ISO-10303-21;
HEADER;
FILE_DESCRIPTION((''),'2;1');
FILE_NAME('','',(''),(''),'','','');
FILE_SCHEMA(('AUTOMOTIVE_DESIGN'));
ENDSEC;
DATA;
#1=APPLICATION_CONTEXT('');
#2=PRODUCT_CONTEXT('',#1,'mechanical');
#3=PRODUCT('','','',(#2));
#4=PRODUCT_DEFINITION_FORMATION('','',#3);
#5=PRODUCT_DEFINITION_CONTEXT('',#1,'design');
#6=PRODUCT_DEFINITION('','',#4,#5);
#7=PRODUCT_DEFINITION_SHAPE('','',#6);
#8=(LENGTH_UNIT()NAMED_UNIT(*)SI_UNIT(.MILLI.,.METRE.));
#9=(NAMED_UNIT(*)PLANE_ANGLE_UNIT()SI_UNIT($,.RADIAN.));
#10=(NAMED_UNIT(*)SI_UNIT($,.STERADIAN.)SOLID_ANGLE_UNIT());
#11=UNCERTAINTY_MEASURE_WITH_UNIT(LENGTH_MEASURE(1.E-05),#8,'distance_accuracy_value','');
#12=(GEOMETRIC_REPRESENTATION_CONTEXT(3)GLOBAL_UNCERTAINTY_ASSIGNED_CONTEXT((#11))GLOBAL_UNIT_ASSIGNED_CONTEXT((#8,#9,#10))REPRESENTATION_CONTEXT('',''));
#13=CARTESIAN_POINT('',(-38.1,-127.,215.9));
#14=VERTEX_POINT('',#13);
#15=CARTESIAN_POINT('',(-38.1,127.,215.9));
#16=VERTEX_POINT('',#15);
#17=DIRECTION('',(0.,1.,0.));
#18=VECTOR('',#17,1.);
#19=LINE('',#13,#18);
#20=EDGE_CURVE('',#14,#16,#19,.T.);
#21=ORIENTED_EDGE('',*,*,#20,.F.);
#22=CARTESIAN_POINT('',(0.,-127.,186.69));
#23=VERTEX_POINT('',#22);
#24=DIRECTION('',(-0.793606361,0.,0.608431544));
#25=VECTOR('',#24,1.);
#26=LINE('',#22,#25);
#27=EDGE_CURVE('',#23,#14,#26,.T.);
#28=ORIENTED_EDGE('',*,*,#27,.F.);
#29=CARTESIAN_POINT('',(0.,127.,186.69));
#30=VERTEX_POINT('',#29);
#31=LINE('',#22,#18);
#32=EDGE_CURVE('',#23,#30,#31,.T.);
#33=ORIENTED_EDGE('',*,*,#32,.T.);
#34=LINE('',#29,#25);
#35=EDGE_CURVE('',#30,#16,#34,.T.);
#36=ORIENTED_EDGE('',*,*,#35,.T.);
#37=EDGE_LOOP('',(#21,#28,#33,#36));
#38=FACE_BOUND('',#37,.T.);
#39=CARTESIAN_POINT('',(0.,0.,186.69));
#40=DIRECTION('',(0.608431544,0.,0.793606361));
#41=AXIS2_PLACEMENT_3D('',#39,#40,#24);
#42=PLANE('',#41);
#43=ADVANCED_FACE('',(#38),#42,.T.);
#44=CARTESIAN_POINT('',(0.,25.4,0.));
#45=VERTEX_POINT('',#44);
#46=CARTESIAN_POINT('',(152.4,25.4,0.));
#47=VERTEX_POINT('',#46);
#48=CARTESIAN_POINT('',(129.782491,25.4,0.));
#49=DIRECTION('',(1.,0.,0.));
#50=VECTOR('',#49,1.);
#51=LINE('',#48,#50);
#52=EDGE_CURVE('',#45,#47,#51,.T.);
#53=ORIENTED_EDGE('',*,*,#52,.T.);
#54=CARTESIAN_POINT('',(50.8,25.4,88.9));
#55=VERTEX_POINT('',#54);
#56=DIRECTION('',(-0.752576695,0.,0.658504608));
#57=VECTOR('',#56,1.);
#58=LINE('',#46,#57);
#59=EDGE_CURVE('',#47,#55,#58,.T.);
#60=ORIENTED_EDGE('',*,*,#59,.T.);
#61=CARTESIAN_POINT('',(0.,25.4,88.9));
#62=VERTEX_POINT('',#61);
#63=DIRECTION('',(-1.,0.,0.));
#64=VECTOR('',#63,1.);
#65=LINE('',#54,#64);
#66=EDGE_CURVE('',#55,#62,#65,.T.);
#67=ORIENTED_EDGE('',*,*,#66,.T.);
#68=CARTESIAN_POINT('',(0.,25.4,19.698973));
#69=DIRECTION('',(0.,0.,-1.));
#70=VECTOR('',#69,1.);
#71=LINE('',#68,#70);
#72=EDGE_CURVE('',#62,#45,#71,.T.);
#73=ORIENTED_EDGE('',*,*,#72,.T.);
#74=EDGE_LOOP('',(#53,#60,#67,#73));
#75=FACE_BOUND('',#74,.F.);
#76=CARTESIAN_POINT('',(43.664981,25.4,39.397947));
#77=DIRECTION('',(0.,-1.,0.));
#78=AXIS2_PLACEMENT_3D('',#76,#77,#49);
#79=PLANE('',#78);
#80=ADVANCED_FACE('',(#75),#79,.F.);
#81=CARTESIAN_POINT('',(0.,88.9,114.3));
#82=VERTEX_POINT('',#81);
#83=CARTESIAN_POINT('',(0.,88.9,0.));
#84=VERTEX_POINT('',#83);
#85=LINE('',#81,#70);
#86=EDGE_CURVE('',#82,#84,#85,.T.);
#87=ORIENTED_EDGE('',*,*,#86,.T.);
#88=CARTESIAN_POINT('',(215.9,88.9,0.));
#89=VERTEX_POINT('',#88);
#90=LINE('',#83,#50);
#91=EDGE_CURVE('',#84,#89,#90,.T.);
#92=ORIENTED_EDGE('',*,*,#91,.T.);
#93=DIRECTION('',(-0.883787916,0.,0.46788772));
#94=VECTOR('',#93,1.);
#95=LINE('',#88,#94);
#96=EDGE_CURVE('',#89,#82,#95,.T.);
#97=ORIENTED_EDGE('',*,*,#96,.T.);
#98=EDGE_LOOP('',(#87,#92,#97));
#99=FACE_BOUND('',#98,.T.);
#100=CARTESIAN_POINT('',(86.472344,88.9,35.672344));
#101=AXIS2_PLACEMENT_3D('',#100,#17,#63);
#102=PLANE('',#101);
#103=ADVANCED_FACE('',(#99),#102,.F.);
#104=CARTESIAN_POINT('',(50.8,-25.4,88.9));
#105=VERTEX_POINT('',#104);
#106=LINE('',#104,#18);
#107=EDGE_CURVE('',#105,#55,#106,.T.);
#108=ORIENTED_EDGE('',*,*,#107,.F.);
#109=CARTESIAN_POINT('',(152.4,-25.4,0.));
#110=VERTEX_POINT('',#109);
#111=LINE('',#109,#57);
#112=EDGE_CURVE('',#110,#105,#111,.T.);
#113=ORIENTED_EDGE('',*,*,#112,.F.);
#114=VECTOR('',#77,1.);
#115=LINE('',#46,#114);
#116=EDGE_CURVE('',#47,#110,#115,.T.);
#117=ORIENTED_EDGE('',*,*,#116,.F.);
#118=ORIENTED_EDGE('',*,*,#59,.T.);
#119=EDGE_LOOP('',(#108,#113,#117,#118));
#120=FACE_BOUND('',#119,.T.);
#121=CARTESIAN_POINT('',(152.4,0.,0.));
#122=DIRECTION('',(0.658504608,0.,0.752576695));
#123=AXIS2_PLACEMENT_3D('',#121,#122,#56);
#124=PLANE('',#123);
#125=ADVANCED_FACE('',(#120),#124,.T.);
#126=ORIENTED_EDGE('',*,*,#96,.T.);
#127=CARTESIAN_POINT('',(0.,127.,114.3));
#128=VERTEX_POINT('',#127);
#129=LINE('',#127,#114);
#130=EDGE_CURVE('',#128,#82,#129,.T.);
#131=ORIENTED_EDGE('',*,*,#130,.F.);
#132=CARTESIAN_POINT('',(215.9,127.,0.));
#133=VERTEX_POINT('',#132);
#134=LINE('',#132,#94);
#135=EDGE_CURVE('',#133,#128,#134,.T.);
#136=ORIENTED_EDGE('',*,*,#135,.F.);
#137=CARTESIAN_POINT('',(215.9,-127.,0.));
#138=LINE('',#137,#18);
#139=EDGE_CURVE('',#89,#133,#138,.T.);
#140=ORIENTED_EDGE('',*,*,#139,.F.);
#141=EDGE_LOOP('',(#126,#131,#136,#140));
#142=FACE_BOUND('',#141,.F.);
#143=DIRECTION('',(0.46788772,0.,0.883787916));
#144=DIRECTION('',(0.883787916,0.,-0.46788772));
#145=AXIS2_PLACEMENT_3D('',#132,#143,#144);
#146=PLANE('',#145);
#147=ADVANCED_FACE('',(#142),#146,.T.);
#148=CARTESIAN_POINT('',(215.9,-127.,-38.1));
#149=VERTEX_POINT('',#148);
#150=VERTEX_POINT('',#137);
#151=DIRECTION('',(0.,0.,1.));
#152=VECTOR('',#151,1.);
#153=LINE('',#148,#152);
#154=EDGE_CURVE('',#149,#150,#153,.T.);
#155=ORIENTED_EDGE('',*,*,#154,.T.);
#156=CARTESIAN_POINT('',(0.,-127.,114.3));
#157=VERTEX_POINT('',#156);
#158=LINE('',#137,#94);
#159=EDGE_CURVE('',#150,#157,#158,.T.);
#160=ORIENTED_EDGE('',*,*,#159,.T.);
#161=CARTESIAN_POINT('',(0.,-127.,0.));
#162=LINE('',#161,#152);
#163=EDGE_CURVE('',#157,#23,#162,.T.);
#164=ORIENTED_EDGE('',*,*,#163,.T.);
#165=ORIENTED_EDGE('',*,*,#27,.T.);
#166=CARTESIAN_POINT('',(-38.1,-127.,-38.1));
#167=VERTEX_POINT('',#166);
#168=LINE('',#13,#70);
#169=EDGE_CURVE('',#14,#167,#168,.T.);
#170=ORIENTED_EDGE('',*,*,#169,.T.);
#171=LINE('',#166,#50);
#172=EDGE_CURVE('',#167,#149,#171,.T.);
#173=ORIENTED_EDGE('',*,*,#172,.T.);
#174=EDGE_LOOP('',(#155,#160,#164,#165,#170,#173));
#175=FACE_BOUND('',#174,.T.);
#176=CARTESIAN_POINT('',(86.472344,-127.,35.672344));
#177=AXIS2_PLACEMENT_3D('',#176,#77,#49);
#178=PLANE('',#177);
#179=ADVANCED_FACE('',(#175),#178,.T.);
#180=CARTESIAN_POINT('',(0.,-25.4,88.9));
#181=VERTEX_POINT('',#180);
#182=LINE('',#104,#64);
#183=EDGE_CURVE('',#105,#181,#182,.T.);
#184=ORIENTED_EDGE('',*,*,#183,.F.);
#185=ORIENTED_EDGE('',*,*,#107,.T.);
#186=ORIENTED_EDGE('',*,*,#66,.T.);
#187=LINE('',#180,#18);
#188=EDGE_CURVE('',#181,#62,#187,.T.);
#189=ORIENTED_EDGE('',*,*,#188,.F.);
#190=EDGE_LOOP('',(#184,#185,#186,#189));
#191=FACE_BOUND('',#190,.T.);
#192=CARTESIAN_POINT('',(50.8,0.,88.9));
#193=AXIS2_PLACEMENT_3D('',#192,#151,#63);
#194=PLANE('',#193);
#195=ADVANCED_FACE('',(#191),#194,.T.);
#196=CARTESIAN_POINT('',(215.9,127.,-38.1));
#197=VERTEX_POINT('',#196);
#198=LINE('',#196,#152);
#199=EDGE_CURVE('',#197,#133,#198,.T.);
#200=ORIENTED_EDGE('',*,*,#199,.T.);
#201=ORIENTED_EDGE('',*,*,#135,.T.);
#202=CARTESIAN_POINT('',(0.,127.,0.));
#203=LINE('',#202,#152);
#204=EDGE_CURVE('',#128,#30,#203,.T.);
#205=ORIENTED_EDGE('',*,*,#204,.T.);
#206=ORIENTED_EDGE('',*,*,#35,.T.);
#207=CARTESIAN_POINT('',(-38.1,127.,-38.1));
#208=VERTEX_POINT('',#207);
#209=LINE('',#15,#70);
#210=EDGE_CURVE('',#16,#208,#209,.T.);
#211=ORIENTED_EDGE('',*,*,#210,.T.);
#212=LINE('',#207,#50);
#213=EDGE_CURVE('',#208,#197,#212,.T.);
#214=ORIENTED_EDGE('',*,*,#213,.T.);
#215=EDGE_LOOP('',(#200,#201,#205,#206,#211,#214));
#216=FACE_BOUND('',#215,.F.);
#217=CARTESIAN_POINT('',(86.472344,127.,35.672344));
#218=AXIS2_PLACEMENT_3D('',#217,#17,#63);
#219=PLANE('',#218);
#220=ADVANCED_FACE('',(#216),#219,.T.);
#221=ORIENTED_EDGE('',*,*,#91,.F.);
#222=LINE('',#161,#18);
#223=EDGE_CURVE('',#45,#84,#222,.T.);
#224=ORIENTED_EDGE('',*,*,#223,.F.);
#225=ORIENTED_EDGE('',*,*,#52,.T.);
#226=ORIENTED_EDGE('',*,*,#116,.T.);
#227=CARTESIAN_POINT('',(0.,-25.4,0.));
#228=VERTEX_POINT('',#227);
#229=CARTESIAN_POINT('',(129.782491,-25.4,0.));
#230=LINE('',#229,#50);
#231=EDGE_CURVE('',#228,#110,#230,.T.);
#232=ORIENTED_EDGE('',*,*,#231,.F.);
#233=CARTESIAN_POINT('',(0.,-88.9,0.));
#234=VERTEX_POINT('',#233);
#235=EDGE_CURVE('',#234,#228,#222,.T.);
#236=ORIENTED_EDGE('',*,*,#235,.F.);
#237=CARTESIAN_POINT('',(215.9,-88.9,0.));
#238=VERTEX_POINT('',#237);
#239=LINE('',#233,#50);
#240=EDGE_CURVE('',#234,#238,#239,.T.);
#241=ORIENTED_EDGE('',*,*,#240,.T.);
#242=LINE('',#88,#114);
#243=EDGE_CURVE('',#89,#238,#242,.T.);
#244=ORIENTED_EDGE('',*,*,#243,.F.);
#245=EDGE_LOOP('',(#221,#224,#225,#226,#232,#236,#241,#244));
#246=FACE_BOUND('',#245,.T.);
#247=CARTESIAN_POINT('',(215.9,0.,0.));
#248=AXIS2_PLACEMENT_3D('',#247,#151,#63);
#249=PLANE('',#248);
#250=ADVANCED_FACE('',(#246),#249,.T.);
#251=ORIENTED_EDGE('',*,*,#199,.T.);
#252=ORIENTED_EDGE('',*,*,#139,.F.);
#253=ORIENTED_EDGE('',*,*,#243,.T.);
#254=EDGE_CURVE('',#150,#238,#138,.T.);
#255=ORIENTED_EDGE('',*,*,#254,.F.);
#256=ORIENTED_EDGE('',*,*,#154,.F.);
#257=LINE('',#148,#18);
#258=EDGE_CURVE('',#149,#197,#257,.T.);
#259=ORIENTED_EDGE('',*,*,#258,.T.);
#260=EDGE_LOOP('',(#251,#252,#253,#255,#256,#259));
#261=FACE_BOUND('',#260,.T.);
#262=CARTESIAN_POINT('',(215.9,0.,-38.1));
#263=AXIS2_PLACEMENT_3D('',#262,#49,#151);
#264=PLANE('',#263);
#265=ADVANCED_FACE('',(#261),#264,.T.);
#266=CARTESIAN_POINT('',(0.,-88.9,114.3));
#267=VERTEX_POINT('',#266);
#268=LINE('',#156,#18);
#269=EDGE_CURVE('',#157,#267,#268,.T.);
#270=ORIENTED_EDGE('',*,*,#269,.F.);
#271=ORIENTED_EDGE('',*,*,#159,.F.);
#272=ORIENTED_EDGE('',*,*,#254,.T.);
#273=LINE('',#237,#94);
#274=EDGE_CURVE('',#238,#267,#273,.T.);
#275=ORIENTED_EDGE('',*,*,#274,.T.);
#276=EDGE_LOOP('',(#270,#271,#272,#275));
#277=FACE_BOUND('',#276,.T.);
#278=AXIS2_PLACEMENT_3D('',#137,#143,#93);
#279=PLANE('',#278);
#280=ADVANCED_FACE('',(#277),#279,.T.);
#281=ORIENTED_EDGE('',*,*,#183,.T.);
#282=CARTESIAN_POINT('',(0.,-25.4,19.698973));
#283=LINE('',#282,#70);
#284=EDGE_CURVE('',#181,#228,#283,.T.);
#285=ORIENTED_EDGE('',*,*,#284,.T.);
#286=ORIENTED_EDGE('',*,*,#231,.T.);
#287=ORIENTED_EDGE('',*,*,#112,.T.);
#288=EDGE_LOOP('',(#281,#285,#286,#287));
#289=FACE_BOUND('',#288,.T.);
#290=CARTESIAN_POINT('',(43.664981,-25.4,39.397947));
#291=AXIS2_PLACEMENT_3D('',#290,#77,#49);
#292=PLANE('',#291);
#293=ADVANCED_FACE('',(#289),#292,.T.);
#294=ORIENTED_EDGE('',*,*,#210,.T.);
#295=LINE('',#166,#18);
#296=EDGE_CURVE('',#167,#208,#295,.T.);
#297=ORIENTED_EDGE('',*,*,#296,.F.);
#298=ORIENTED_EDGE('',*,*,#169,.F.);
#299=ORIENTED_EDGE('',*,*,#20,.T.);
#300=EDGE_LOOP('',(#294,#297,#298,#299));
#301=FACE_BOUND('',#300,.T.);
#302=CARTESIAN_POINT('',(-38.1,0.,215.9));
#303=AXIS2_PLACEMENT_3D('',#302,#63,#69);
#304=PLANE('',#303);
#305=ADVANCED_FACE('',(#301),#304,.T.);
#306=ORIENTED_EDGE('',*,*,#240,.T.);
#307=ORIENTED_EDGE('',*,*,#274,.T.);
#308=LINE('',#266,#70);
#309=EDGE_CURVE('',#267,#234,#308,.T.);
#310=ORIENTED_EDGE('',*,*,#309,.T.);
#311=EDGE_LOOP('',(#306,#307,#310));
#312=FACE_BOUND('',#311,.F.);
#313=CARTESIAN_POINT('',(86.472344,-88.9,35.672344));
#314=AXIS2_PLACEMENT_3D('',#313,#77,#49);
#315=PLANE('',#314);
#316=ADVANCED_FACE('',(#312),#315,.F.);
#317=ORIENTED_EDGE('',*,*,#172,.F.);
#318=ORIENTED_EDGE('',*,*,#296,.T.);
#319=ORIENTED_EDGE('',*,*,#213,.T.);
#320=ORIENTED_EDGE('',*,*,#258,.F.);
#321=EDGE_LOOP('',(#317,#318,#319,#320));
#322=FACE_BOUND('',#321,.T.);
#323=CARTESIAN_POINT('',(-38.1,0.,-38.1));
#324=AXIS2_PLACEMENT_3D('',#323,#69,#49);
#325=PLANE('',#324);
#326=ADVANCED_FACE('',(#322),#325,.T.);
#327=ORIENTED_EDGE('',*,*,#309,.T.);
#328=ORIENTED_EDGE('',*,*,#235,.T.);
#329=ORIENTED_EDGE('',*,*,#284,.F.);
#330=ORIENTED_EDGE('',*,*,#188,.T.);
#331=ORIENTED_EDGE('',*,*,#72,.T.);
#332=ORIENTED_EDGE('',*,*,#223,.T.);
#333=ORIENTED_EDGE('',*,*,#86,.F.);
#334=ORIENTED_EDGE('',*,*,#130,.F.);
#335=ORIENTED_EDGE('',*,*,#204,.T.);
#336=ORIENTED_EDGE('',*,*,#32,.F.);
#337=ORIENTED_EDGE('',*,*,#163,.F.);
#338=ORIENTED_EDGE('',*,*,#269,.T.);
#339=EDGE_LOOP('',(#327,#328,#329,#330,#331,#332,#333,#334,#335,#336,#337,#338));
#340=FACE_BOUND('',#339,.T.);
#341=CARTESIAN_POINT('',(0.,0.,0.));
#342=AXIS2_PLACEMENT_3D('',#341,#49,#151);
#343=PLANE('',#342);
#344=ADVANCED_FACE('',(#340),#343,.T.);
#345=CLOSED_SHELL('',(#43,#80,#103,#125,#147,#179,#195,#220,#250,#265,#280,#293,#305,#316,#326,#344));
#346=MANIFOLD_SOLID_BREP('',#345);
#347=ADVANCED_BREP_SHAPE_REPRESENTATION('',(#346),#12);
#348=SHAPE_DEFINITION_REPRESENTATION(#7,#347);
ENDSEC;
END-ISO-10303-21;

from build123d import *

# Parameters (mm, degrees)
F1_DEPTH = 127
F3_DEPTH = 38.1
F4_DEPTH = 25.4


# Not quite as in the source:
# - a pattern or mirror of a feature is missing from the dataset's text; its kind, count and spacing are read off the source's solid


with BuildPart() as f1:
    # F0 (on Front) → F1 (new body, symmetric)
    with BuildSketch(Plane.XZ):
        Polygon((0, 88.9), (0, 186.69), (-38.1, 215.9), (-38.1, -38.1), (215.9, -38.1), (215.9, 0), (152.4, 0), (0, 0), align=None)
    extrude(amount=F1_DEPTH, both=True)

    # F2 (on face) → F3 (join)
    with BuildSketch(Plane.XZ.offset(127)):
        Polygon((215.9, 0), (0, 114.3), (0, 0), align=None)
    f3 = extrude(amount=-F3_DEPTH)

    # F3_copies: F3 across plane
    add(f3.mirror(Plane.ZX))

    # F0 (on Front) → F4 (join, symmetric)
    with BuildSketch(Plane.XZ):
        Polygon((0, 88.9), (0, 186.69), (-38.1, 215.9), (-38.1, -38.1), (215.9, -38.1), (215.9, 0), (152.4, 0), (0, 0), align=None)
        Polygon((50.8, 88.9), (0, 88.9), (0, 0), (152.4, 0), align=None)
    extrude(amount=F4_DEPTH, both=True)


solid = f1.part
